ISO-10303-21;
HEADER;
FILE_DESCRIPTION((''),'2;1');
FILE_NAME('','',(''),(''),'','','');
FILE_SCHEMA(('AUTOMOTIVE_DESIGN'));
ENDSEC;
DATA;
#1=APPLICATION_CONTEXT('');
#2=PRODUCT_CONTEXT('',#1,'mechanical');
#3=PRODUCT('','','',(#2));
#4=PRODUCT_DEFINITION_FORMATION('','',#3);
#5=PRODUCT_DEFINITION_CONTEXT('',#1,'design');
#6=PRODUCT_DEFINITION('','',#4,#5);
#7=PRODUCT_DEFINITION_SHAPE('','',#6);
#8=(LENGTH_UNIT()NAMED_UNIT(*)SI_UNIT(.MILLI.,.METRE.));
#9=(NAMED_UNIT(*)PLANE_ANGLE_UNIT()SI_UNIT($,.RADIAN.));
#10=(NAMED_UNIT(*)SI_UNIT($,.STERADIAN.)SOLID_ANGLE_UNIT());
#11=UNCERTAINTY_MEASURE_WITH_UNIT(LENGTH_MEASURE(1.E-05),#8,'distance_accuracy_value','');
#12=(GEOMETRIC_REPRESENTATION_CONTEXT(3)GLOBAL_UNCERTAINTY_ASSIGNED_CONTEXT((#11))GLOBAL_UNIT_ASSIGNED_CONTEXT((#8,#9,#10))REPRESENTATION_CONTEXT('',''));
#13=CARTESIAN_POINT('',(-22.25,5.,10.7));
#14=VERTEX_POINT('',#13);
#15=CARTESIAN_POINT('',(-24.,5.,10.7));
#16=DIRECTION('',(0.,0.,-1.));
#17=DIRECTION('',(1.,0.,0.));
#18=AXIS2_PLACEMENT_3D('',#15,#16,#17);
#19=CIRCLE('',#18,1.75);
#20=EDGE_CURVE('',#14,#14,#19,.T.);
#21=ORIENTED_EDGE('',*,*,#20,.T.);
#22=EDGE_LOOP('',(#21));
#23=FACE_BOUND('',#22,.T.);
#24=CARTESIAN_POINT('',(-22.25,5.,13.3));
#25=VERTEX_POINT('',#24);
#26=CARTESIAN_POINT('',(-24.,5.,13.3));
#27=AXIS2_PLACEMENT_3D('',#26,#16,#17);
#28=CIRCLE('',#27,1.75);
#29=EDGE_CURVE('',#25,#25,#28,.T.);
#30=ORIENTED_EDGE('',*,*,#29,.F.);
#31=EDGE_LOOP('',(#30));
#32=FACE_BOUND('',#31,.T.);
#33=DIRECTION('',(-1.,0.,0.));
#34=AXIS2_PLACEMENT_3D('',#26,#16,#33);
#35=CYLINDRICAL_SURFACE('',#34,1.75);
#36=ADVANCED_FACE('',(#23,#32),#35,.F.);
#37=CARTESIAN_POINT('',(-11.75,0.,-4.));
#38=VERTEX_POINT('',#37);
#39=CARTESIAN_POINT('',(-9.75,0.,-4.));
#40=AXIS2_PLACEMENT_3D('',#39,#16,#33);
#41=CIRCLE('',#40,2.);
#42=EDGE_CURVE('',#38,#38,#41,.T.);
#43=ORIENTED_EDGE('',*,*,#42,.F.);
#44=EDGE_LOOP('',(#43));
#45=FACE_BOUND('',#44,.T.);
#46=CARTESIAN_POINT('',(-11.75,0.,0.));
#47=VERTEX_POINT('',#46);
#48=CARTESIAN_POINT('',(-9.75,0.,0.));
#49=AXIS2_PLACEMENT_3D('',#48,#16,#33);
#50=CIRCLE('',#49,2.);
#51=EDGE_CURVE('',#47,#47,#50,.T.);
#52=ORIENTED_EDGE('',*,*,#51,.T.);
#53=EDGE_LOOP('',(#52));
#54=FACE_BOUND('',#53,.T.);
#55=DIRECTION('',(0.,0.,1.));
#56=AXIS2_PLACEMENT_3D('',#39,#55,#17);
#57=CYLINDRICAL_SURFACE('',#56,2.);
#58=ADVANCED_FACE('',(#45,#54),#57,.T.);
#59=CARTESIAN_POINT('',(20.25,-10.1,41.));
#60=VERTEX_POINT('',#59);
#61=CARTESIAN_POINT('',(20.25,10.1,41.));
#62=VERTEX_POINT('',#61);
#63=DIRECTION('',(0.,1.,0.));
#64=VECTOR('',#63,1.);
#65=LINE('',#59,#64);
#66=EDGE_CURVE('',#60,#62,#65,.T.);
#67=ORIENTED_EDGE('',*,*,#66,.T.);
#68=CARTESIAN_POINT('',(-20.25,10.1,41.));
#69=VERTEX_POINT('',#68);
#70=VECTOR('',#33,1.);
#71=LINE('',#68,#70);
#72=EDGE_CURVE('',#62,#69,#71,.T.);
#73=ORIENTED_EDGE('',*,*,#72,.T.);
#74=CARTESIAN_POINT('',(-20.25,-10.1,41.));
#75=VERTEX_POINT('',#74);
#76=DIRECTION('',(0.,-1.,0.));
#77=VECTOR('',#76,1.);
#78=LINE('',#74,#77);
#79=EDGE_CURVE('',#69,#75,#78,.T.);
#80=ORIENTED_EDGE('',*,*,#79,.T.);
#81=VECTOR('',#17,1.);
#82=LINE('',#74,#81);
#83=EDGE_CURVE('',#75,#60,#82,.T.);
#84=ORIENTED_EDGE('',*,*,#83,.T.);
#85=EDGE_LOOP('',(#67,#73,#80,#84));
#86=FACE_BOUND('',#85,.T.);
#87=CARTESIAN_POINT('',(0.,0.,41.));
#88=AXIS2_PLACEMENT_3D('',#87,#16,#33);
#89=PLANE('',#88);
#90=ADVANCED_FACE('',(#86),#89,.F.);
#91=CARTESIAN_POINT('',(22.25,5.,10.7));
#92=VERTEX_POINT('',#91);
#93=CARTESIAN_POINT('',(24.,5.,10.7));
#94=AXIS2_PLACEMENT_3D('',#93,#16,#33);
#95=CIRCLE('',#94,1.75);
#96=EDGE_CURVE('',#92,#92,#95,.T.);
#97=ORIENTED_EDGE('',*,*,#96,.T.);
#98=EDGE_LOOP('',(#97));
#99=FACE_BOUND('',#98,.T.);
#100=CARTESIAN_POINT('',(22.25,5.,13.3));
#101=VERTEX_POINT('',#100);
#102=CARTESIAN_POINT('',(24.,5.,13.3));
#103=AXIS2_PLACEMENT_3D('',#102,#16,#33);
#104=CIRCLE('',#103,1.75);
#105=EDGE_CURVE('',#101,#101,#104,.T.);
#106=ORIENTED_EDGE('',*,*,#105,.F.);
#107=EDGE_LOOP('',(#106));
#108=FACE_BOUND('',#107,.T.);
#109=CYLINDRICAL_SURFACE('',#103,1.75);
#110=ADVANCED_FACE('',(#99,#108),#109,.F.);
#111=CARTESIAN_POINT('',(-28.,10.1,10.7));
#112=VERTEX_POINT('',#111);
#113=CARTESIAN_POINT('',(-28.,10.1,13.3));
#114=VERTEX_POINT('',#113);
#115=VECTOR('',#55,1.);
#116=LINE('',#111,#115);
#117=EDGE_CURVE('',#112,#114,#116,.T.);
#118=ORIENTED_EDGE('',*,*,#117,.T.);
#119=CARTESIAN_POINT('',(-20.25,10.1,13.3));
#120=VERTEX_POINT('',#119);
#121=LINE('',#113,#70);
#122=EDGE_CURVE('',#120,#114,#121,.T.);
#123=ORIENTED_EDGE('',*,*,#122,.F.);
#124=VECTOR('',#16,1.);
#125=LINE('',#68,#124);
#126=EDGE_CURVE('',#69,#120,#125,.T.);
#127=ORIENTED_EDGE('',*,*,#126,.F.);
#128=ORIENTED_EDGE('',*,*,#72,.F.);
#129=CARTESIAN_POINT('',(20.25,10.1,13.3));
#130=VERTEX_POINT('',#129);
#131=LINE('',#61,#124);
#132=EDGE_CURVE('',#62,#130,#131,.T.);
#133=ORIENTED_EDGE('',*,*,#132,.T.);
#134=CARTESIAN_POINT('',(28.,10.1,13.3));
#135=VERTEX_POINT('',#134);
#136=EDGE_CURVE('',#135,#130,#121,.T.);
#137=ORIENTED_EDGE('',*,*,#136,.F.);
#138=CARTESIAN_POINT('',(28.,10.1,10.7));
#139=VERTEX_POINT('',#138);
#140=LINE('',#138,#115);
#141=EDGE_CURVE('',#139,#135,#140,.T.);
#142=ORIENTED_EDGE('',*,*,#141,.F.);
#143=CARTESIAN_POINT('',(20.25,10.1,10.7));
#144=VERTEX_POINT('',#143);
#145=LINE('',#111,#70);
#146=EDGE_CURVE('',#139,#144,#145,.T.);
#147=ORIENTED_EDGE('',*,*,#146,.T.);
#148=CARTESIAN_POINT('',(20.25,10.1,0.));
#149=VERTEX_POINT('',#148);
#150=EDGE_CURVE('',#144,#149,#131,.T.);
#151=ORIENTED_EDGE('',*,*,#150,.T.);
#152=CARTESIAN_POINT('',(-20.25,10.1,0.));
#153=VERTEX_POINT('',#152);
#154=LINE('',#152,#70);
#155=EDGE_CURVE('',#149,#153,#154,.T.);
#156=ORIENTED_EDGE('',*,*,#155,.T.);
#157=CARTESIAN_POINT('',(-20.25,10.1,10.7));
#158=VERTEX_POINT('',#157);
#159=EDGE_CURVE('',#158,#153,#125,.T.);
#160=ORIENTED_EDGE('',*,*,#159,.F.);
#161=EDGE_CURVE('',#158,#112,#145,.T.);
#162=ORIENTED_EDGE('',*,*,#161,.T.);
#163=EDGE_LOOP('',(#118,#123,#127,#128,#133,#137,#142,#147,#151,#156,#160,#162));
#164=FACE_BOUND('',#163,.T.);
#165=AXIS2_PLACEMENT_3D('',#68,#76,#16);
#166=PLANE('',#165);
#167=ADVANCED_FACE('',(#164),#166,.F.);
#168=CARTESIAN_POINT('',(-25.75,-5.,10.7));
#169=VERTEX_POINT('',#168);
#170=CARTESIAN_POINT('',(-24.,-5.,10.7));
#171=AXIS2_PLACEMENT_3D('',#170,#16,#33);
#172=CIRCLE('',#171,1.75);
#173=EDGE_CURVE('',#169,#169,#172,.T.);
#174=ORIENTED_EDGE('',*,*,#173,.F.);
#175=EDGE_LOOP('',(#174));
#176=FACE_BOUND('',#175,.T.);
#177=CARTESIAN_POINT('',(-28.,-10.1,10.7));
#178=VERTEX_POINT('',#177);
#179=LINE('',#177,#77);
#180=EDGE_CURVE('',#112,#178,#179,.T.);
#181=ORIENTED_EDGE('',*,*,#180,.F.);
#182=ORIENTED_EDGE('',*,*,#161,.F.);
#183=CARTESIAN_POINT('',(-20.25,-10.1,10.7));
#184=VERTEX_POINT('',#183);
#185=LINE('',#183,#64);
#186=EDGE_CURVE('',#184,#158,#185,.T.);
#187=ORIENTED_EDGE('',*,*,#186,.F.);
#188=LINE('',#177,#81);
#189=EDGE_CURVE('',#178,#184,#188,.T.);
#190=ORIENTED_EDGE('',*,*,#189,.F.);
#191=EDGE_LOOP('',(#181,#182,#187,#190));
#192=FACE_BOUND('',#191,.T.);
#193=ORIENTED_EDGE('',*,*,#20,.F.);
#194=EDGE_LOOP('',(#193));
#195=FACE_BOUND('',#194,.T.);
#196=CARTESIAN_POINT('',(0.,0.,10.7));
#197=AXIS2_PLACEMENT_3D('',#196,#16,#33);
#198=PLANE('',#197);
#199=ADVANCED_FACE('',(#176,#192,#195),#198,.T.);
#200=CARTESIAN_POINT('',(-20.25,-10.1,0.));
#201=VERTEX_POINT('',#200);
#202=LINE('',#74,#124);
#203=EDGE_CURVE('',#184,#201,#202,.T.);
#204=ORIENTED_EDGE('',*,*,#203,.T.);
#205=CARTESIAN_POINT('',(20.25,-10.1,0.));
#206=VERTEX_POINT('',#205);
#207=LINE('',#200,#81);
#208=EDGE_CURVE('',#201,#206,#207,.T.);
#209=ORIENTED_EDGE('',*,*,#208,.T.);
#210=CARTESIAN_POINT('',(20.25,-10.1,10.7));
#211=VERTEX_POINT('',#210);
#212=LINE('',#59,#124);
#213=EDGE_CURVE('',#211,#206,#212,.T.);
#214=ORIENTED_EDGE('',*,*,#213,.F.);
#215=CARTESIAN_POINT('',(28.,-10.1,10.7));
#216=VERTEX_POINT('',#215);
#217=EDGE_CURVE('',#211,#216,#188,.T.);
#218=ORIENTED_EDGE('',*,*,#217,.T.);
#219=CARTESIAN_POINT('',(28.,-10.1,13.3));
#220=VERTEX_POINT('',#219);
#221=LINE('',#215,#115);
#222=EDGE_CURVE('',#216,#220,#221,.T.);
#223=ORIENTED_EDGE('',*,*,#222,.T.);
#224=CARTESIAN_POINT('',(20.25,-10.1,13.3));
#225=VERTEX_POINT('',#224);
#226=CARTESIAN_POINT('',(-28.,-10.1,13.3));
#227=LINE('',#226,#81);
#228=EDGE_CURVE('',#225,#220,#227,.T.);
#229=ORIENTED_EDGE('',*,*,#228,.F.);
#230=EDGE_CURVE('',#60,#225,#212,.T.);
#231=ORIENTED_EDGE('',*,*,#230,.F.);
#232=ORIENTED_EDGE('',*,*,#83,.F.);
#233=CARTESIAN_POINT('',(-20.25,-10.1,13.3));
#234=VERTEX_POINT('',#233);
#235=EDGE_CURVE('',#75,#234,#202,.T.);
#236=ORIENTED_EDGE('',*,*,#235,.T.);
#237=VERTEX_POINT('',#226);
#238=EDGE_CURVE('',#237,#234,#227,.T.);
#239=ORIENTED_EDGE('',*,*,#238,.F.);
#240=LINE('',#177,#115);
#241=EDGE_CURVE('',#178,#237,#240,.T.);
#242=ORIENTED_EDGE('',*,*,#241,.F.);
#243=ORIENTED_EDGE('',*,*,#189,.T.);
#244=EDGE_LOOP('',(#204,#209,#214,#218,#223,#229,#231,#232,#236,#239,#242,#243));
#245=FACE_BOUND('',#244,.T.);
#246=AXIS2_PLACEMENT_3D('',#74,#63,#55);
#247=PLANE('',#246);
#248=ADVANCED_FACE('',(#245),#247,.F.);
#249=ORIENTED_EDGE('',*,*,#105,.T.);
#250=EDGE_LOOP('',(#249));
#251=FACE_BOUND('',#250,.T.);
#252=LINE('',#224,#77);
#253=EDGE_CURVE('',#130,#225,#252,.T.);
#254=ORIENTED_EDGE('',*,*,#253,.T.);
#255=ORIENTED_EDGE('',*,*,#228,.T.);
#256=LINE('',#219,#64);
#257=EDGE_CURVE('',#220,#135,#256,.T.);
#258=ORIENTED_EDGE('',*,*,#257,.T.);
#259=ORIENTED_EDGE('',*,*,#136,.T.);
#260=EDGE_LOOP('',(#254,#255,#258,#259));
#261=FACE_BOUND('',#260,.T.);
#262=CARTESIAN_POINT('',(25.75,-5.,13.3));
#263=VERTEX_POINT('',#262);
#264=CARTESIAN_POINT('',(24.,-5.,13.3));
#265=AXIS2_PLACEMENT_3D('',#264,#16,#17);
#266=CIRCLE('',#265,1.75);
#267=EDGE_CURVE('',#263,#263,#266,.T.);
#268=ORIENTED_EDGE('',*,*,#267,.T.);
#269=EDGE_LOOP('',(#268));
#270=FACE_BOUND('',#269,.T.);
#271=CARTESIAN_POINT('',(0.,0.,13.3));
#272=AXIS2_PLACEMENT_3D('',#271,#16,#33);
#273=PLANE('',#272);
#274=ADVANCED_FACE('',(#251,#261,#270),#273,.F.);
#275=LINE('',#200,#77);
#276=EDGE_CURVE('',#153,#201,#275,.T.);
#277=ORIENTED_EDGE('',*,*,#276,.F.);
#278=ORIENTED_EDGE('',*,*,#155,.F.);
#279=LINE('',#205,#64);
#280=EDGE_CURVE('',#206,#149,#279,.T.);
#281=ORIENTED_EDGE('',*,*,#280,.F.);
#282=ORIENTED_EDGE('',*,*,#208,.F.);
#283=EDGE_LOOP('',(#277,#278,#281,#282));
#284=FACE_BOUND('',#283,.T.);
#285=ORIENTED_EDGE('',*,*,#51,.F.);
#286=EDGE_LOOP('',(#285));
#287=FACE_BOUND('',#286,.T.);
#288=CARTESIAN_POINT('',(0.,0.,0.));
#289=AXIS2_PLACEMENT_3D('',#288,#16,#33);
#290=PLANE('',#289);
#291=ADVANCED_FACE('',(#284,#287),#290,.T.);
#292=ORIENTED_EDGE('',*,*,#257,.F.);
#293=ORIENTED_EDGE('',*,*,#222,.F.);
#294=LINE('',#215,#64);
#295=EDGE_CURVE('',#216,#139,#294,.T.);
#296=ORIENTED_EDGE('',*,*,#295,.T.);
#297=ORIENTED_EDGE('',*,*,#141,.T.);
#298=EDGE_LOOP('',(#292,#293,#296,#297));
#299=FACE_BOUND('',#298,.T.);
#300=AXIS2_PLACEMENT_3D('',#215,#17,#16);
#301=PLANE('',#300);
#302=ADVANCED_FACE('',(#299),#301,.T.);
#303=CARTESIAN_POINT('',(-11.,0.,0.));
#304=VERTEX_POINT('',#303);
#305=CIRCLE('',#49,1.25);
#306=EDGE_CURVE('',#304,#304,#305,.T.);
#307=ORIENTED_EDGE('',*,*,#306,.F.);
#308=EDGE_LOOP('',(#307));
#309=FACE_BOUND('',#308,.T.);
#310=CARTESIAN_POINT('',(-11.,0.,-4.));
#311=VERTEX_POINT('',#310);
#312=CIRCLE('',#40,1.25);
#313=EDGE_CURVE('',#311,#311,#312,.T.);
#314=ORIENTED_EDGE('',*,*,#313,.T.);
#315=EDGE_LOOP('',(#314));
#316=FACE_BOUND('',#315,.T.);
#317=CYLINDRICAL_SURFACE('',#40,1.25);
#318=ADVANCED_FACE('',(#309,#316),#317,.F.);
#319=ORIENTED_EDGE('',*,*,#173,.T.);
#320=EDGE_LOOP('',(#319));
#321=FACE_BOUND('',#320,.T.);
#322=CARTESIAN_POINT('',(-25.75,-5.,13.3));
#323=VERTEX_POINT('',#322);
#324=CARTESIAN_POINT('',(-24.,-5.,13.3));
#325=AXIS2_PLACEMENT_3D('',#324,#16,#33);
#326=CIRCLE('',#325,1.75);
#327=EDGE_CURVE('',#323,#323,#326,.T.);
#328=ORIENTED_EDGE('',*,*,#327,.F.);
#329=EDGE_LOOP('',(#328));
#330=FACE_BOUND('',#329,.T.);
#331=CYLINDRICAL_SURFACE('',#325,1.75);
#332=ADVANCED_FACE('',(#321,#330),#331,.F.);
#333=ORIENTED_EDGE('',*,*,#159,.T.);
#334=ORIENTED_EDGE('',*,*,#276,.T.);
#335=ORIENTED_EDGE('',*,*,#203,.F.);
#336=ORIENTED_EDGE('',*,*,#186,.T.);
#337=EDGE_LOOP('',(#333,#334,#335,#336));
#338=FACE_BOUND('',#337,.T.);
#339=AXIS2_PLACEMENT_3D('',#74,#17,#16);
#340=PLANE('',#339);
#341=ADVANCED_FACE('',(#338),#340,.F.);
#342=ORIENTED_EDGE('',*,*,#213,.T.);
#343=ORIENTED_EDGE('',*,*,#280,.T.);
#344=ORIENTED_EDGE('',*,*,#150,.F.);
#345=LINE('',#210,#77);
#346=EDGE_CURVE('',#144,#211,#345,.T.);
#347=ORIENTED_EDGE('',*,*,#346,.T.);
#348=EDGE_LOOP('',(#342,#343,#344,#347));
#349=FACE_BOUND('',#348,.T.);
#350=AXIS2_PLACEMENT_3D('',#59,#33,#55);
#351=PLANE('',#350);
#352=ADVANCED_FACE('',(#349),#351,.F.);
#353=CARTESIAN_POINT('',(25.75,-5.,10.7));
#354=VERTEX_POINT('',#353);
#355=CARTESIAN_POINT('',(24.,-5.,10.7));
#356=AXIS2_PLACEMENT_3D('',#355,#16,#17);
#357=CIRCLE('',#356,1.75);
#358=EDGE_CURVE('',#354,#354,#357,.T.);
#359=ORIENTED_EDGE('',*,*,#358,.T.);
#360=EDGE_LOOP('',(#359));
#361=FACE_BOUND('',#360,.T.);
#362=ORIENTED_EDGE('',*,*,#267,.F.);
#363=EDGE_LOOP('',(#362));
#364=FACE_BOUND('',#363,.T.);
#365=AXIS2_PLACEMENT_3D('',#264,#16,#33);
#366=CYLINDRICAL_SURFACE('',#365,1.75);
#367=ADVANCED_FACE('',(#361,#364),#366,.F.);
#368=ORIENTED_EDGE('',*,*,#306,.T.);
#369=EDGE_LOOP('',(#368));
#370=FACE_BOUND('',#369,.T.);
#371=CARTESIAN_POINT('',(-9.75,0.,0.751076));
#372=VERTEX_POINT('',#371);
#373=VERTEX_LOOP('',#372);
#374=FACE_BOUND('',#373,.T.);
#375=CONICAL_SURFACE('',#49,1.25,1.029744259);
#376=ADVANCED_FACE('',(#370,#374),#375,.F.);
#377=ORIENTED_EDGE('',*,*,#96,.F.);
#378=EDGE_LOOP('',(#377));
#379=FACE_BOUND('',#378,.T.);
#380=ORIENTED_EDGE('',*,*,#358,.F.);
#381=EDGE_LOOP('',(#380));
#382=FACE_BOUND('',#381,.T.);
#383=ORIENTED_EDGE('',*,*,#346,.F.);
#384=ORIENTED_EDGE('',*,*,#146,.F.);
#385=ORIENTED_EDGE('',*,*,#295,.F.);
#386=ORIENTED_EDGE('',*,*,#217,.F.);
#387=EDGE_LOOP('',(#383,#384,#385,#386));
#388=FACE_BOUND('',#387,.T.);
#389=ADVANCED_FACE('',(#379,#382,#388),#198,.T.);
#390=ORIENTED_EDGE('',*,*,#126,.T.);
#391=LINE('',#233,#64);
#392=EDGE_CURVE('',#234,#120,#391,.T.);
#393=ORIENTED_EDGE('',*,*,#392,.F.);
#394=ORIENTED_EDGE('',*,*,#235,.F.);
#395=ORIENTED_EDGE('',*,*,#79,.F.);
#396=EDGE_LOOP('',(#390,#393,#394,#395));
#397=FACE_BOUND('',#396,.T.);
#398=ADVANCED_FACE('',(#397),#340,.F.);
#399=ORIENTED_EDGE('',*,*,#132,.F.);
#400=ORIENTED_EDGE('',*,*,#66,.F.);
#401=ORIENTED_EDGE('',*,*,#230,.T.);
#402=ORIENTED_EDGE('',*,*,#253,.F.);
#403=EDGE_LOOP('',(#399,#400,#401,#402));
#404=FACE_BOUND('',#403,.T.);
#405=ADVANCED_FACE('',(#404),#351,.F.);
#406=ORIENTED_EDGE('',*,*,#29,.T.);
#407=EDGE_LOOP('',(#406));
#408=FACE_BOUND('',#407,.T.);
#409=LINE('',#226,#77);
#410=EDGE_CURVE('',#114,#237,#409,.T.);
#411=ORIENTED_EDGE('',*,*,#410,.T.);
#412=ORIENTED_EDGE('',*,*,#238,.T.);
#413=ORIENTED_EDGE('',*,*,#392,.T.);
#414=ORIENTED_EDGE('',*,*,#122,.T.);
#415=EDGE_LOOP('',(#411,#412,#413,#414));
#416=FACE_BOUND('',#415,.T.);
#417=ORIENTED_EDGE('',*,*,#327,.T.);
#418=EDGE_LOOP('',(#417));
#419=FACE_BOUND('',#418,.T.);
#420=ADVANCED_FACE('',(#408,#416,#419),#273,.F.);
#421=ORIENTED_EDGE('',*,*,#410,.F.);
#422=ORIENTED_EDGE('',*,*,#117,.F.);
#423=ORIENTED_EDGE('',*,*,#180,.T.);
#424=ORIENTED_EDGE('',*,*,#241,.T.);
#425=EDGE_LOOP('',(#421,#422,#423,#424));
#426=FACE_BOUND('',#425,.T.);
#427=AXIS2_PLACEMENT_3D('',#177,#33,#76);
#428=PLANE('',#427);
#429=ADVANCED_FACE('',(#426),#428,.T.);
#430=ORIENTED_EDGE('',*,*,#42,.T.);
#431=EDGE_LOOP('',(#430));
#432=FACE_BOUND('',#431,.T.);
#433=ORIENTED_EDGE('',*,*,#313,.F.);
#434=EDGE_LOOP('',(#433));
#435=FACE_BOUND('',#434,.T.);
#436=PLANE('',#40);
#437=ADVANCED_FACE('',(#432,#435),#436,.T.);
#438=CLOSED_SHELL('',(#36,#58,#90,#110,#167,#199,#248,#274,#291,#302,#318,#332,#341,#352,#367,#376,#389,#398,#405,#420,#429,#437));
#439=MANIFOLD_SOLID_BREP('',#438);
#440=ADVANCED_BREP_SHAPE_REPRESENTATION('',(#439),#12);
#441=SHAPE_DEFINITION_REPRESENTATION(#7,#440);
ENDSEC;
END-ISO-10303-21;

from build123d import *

# Parameters (mm, degrees)
SKETCH_1_W          = 40.5
SKETCH_1_H          = 20.2
EXTRUDE_1_DEPTH     = 41
SKETCH_2_W          = 56
SKETCH_2_H          = 20.2
EXTRUDE_2_DEPTH     = 2.6
SKETCH_3_R          = 1.75
CUT_EXTRUDE_1_DEPTH = 2.6
SKETCH_4_R          = 2
EXTRUDE_3_DEPTH     = 4


# Read off the part's stored shape, not the designer's step: M3 螺纹孔1
with BuildPart() as part:
    # 草图1 → 凸台-拉伸1 (new body)
    with BuildSketch(Plane.XY):
        Rectangle(SKETCH_1_W, SKETCH_1_H)
    extrude(amount=EXTRUDE_1_DEPTH)

    # 草图2 → 凸台-拉伸2 (add)
    with BuildSketch(Plane.XY.offset(13.3)):
        Rectangle(SKETCH_2_W, SKETCH_2_H)
    extrude(amount=-EXTRUDE_2_DEPTH)

    # 草图3 → 切除-拉伸1 (cut)
    with BuildSketch(Plane(origin=(0, 0, 10.7), x_dir=(-1, 0, 0), z_dir=(0, 0, -1))):
        with Locations((-24, 5)):
            Circle(SKETCH_3_R)
        with Locations(Location((24, 5, 0), (0, 0, 180))):
            Circle(SKETCH_3_R)
        with Locations((24, -5)):
            Circle(SKETCH_3_R)
        with Locations(Location((-24, -5, 0), (0, 0, 180))):
            Circle(SKETCH_3_R)
    extrude(amount=-CUT_EXTRUDE_1_DEPTH, mode=Mode.SUBTRACT)

    # 草图4 → 凸台-拉伸3 (add)
    with BuildSketch(Plane(origin=(0, 0, 0), x_dir=(-1, 0, 0), z_dir=(0, 0, -1))):
        with Locations((9.75, 0)):
            Circle(SKETCH_4_R)
    extrude(amount=EXTRUDE_3_DEPTH)

    # M3 螺纹孔1 outline → M3 螺纹孔1 (revolve, cut)
    with BuildSketch(Plane(origin=(-9.75, 0, 0), x_dir=(1, 0, 0), z_dir=(0, -1, 0))):
        Polygon((1.25, 0), (0, 0.751075774), (0, -4), (1.25, -4), align=None)
    revolve(axis=Axis((-9.75, 0, 0), (0, 0, 1)), mode=Mode.SUBTRACT)


solid = part.part
